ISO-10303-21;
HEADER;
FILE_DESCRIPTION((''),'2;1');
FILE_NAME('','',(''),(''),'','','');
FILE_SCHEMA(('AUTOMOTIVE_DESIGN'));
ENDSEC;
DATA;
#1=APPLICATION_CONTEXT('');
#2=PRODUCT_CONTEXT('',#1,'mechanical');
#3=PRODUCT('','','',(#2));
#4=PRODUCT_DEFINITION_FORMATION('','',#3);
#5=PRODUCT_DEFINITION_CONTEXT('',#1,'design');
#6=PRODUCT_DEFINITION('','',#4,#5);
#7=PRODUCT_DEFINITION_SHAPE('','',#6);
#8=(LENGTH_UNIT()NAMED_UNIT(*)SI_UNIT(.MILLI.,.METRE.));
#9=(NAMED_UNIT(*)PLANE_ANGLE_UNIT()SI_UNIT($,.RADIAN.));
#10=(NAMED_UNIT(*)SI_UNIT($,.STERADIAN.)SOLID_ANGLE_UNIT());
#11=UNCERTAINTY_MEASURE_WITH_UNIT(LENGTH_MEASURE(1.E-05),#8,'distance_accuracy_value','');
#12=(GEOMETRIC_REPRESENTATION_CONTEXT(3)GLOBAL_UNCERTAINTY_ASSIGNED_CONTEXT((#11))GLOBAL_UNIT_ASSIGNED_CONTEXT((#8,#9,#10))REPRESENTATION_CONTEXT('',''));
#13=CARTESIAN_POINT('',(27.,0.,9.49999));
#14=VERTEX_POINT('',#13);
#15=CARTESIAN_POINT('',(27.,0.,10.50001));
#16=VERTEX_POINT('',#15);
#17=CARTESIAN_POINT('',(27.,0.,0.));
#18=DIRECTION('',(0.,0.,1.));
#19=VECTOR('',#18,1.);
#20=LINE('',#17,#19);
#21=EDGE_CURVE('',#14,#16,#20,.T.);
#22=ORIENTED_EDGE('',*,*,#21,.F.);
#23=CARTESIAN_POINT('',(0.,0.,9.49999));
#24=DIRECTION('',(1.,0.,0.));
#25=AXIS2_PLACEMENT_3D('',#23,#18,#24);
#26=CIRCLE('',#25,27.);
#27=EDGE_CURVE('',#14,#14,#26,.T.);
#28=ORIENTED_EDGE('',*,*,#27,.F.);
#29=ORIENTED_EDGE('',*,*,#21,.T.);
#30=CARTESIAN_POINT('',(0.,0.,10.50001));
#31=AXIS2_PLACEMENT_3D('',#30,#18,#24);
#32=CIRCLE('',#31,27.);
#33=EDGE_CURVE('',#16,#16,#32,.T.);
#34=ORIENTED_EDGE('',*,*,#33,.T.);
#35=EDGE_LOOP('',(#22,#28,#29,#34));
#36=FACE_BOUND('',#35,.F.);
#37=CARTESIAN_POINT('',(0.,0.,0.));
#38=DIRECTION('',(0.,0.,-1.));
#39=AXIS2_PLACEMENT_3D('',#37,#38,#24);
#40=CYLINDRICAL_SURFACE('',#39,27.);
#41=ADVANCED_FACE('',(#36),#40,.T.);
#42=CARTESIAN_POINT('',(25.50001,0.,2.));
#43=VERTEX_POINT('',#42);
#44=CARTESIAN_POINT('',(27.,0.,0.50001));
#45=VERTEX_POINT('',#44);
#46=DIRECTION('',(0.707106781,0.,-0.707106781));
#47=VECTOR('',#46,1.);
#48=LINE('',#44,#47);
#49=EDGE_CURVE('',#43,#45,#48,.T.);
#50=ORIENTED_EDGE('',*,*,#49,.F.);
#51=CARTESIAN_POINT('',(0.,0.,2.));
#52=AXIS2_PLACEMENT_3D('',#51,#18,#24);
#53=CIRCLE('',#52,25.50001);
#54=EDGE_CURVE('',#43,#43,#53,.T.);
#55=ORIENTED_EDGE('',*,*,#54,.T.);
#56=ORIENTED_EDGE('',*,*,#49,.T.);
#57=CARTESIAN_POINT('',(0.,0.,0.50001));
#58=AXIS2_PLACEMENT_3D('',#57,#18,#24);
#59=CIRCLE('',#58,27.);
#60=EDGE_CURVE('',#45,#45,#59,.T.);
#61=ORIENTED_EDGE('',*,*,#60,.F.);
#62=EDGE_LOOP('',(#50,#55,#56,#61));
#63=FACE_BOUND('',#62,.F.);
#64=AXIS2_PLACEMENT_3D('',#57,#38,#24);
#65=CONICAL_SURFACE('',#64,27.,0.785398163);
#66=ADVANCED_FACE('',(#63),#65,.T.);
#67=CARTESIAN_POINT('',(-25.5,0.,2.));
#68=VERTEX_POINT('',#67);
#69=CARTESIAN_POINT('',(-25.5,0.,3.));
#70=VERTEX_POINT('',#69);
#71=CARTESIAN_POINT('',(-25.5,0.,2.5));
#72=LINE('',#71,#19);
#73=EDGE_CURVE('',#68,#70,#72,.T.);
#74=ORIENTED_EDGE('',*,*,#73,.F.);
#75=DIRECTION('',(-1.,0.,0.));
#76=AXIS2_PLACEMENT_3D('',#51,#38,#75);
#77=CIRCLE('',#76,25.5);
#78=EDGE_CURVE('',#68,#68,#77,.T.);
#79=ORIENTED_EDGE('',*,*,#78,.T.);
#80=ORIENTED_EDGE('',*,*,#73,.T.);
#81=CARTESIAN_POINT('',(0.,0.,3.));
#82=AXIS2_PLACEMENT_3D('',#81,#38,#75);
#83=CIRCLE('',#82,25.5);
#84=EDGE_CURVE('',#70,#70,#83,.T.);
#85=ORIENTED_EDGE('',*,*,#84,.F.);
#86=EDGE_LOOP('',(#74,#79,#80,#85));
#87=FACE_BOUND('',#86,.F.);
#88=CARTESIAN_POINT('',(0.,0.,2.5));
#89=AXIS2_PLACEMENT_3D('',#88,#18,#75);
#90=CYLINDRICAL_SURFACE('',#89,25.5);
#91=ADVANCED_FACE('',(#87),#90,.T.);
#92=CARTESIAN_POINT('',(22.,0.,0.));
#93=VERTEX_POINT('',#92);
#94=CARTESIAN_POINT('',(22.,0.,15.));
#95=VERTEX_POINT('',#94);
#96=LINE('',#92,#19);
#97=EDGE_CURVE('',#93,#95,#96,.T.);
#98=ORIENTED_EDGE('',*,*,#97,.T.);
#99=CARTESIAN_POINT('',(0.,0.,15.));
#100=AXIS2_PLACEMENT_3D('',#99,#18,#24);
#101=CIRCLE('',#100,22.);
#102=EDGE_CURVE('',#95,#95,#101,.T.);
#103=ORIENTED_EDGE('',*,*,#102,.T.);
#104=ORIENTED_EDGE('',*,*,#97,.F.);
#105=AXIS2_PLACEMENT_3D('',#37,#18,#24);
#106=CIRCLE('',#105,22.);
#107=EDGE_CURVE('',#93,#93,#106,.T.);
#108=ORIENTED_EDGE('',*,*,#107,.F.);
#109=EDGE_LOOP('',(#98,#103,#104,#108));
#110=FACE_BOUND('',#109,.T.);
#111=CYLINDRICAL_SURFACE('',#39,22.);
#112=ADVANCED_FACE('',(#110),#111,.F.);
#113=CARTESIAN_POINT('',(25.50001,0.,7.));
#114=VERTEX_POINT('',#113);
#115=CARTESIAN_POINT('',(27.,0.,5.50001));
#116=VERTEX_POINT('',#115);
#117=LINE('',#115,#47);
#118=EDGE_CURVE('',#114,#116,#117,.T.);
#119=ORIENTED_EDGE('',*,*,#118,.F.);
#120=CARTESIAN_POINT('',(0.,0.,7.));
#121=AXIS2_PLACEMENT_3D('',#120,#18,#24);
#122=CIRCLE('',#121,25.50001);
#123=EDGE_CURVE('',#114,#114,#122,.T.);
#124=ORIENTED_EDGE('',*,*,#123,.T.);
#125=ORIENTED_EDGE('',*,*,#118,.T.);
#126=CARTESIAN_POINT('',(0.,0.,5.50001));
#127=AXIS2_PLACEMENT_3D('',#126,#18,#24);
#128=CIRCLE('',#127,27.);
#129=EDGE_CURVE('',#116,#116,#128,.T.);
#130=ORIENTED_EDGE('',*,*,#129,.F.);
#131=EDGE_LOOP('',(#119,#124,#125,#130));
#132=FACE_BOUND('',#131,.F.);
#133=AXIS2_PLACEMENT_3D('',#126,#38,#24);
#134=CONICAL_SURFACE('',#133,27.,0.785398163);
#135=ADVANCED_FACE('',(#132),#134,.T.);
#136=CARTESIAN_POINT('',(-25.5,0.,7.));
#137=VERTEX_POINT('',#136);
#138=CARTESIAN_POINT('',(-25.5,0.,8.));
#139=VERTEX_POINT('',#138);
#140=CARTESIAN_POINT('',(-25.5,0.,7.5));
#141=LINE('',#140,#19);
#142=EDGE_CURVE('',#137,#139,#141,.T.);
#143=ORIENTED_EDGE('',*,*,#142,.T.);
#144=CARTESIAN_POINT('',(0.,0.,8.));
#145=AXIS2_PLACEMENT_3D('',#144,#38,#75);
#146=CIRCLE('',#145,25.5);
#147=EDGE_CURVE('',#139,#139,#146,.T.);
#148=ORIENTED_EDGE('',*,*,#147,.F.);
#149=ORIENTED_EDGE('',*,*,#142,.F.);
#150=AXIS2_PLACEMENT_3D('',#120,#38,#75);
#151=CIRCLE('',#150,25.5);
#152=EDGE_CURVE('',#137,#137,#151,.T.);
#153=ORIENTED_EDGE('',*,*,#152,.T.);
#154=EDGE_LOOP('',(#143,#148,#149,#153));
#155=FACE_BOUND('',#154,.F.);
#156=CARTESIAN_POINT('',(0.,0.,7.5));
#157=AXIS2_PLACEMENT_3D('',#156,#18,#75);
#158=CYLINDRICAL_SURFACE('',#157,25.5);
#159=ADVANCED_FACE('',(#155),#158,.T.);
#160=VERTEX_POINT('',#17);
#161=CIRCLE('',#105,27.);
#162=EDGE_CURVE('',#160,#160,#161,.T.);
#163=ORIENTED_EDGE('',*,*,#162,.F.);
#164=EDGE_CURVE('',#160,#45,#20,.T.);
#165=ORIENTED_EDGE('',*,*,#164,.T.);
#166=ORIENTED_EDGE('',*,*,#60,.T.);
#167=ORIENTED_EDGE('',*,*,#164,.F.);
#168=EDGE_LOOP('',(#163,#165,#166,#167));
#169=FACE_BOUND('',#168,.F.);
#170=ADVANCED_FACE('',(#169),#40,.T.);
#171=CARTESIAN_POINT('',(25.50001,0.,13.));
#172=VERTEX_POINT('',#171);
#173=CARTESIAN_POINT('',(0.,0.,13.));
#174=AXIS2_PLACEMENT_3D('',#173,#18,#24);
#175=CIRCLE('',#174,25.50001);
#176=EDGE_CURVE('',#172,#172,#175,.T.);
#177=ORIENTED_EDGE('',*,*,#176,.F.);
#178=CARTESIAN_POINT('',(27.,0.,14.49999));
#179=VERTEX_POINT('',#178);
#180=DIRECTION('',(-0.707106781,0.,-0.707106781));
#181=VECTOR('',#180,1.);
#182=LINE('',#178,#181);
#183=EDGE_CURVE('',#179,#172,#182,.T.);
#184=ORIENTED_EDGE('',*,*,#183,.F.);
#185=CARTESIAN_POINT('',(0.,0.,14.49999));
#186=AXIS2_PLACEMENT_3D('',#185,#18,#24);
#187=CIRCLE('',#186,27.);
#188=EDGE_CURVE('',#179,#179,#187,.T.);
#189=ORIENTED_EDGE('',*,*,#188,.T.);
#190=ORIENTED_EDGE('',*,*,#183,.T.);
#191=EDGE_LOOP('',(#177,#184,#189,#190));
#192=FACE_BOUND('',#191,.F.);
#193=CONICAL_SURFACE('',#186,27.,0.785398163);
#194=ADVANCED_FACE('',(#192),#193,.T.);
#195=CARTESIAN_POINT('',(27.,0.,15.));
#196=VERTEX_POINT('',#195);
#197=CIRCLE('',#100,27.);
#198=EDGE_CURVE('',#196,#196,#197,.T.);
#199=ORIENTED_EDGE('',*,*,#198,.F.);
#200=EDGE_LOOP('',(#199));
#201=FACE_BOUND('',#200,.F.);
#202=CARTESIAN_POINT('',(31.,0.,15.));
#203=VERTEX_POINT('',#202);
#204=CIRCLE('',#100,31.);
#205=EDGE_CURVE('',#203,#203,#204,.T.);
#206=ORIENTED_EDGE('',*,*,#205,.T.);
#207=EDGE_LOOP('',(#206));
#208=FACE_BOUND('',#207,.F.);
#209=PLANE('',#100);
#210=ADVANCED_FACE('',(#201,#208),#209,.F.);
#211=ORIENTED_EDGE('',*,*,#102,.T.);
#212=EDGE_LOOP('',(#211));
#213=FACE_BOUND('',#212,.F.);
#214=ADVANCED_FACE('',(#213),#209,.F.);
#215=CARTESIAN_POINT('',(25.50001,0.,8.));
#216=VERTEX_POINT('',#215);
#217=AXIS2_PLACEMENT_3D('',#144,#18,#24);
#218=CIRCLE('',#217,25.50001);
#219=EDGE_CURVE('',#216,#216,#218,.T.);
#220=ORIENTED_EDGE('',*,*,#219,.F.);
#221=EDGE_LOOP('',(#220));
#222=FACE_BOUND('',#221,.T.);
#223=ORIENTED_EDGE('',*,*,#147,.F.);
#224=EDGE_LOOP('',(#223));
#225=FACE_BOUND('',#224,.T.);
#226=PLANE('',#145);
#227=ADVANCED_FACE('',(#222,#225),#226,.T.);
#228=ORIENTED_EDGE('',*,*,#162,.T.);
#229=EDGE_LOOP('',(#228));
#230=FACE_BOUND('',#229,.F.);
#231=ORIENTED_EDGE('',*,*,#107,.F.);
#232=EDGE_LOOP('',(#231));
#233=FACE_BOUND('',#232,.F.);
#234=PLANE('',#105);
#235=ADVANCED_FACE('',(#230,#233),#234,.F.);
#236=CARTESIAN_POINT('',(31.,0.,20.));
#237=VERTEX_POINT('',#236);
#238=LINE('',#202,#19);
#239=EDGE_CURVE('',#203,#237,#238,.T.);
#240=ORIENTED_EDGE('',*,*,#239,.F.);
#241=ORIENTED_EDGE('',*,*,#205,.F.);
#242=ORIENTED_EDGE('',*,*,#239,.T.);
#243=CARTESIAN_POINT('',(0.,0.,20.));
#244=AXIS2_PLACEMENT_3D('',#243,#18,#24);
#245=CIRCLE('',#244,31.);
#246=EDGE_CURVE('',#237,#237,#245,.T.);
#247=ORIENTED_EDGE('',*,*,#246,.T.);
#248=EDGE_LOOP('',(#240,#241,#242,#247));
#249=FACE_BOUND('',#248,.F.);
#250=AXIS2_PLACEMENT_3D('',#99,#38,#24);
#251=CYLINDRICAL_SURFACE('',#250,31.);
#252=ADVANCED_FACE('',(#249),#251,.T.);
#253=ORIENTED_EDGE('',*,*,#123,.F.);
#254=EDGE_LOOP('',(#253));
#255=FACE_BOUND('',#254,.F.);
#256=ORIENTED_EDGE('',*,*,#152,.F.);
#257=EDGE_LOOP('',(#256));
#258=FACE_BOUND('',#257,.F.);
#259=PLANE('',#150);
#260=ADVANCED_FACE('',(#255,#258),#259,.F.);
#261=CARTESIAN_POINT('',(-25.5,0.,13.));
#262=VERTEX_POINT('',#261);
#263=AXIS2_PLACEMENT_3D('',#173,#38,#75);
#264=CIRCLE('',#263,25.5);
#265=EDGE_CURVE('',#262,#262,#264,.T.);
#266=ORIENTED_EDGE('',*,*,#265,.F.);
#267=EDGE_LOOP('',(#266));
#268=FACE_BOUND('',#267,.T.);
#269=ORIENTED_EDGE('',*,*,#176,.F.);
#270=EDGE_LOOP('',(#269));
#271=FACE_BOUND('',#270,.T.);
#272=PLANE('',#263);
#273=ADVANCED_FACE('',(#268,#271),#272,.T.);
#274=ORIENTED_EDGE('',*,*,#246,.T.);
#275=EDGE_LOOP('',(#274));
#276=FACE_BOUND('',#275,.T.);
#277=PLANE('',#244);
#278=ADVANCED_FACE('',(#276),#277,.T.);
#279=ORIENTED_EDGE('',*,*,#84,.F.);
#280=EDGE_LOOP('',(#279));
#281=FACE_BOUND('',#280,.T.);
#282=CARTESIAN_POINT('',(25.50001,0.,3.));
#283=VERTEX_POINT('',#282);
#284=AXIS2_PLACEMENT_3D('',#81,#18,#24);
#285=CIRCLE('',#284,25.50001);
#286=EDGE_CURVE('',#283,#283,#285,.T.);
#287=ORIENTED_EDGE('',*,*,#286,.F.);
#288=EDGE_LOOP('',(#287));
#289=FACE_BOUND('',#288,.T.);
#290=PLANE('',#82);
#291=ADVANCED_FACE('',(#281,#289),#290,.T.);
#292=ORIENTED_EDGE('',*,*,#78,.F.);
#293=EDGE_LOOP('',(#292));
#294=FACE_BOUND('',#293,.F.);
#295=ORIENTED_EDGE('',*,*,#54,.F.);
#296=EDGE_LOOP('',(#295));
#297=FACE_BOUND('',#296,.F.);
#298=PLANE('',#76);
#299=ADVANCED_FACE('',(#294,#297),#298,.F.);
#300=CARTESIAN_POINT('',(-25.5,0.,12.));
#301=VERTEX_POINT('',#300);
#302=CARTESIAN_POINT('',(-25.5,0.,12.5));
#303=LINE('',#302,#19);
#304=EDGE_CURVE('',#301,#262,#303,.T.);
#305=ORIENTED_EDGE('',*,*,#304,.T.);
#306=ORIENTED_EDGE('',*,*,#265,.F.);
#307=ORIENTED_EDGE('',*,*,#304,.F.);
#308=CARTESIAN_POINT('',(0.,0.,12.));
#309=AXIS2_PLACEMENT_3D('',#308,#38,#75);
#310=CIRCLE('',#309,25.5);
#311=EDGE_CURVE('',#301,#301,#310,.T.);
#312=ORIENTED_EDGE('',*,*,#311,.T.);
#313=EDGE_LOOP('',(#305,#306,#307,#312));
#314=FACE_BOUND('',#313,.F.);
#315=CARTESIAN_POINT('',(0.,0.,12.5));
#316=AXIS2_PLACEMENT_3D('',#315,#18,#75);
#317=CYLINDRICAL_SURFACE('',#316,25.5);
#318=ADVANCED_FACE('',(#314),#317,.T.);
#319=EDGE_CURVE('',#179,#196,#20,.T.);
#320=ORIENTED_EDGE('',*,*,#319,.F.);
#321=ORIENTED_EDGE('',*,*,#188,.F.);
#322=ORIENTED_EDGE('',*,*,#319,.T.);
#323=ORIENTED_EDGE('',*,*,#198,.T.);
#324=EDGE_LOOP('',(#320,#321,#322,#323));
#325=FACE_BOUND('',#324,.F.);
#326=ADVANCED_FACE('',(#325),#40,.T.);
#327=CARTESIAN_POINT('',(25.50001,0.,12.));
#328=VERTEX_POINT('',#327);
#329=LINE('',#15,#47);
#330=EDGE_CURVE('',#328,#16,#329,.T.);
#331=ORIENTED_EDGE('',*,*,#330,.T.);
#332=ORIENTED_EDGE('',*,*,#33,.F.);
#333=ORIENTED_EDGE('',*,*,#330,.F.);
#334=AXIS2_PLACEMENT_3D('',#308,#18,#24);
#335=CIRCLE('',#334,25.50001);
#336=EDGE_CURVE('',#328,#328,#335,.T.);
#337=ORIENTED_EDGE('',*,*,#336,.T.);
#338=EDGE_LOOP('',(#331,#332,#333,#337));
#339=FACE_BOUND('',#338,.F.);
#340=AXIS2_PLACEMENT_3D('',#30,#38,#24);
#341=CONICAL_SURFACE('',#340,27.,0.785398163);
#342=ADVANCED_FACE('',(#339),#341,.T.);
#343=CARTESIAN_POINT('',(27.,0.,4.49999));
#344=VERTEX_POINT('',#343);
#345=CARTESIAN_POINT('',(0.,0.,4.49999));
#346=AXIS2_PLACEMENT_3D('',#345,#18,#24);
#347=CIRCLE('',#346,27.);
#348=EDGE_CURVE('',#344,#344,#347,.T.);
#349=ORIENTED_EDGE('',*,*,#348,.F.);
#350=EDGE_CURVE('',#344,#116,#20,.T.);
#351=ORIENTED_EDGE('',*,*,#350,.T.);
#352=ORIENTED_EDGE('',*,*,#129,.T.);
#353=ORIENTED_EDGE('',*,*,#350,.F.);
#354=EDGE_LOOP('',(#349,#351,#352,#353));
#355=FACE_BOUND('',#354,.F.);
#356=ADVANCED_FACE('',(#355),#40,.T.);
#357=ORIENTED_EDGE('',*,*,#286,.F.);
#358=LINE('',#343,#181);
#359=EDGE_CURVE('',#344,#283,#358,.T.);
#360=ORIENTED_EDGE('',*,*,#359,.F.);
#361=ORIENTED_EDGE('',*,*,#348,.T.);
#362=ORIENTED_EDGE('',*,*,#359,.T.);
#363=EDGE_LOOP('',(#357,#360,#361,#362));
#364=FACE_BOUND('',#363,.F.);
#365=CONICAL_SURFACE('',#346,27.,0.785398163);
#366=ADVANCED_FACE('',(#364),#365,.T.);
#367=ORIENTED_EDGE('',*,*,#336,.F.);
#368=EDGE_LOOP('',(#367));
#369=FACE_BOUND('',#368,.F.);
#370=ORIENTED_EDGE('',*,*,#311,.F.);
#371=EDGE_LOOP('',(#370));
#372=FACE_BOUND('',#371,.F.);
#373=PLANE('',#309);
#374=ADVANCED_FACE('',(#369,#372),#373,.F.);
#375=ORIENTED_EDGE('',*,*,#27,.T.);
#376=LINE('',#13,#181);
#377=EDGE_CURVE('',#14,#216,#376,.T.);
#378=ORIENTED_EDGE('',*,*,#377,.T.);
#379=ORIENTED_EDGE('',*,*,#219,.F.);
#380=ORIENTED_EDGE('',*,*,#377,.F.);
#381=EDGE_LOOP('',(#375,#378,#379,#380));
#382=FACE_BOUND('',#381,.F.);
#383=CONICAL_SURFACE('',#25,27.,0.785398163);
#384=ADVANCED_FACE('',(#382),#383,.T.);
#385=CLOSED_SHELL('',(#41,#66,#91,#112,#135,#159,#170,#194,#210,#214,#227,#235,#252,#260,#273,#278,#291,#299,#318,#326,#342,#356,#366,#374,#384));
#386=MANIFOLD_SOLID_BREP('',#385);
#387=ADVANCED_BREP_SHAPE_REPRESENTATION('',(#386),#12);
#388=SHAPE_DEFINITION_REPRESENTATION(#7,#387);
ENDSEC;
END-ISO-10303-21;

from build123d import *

# Parameters (mm, degrees)
F0_R     = 27
F0_R_2   = 22
F1_DEPTH = 15
F2_R     = 31
F2_R_2   = 27
F2_R_3   = 22
F3_DEPTH = 5
F4_W     = 1.5
F4_H     = 1
F6_SIZE2 = 1.49999
F6_SIZE  = 1.49999


# Not quite as in the source:
# - a fillet or chamfer is up to 0.001 mm smaller than in the source, because OpenCascade refuses the exact size


with BuildPart() as f1:
    # F0 (on Top) → F1 (new body)
    with BuildSketch(Plane.XY):
        Circle(F0_R)
        Circle(F0_R_2, mode=Mode.SUBTRACT)
    extrude(amount=F1_DEPTH)

    # F2 (on face) → F3 (join)
    with BuildSketch(Plane.XY.offset(15)):
        Circle(F2_R)
        Circle(F2_R_2, mode=Mode.SUBTRACT)
        Circle(F2_R_2)
        Circle(F2_R_3, mode=Mode.SUBTRACT)
        Circle(F2_R_3)
    extrude(amount=F3_DEPTH)

    # F4 (on Front) → F5 (revolve, cut)
    with BuildSketch(Plane.XZ):
        with Locations((-26.25, 2.5)):
            Rectangle(F4_W, F4_H)
        with Locations((-26.25, 7.5)):
            Rectangle(F4_W, F4_H)
        with Locations((-26.25, 12.5)):
            Rectangle(F4_W, F4_H)
    revolve(axis=Axis((0, 0, 9.1704530641), (0, 0, -1)), mode=Mode.SUBTRACT)

    # F6 (size 1.5 and 1.5 in the source; OpenCascade refuses exactly that, so slightly less here)
    f6_edges = [f1.edges().sort_by_distance(p)[0] for p in [
        (-27, 0, 3),
        (27, 0, 5),
        (-27, 0, 7),
        (-27, 0, 2),
        (-27, 0, 8),
        (27, 0, 10),
        (-27, 0, 12),
        (-27, 0, 13),
    ]]
    chamfer(f6_edges, length=F6_SIZE, length2=F6_SIZE2)


solid = f1.part
